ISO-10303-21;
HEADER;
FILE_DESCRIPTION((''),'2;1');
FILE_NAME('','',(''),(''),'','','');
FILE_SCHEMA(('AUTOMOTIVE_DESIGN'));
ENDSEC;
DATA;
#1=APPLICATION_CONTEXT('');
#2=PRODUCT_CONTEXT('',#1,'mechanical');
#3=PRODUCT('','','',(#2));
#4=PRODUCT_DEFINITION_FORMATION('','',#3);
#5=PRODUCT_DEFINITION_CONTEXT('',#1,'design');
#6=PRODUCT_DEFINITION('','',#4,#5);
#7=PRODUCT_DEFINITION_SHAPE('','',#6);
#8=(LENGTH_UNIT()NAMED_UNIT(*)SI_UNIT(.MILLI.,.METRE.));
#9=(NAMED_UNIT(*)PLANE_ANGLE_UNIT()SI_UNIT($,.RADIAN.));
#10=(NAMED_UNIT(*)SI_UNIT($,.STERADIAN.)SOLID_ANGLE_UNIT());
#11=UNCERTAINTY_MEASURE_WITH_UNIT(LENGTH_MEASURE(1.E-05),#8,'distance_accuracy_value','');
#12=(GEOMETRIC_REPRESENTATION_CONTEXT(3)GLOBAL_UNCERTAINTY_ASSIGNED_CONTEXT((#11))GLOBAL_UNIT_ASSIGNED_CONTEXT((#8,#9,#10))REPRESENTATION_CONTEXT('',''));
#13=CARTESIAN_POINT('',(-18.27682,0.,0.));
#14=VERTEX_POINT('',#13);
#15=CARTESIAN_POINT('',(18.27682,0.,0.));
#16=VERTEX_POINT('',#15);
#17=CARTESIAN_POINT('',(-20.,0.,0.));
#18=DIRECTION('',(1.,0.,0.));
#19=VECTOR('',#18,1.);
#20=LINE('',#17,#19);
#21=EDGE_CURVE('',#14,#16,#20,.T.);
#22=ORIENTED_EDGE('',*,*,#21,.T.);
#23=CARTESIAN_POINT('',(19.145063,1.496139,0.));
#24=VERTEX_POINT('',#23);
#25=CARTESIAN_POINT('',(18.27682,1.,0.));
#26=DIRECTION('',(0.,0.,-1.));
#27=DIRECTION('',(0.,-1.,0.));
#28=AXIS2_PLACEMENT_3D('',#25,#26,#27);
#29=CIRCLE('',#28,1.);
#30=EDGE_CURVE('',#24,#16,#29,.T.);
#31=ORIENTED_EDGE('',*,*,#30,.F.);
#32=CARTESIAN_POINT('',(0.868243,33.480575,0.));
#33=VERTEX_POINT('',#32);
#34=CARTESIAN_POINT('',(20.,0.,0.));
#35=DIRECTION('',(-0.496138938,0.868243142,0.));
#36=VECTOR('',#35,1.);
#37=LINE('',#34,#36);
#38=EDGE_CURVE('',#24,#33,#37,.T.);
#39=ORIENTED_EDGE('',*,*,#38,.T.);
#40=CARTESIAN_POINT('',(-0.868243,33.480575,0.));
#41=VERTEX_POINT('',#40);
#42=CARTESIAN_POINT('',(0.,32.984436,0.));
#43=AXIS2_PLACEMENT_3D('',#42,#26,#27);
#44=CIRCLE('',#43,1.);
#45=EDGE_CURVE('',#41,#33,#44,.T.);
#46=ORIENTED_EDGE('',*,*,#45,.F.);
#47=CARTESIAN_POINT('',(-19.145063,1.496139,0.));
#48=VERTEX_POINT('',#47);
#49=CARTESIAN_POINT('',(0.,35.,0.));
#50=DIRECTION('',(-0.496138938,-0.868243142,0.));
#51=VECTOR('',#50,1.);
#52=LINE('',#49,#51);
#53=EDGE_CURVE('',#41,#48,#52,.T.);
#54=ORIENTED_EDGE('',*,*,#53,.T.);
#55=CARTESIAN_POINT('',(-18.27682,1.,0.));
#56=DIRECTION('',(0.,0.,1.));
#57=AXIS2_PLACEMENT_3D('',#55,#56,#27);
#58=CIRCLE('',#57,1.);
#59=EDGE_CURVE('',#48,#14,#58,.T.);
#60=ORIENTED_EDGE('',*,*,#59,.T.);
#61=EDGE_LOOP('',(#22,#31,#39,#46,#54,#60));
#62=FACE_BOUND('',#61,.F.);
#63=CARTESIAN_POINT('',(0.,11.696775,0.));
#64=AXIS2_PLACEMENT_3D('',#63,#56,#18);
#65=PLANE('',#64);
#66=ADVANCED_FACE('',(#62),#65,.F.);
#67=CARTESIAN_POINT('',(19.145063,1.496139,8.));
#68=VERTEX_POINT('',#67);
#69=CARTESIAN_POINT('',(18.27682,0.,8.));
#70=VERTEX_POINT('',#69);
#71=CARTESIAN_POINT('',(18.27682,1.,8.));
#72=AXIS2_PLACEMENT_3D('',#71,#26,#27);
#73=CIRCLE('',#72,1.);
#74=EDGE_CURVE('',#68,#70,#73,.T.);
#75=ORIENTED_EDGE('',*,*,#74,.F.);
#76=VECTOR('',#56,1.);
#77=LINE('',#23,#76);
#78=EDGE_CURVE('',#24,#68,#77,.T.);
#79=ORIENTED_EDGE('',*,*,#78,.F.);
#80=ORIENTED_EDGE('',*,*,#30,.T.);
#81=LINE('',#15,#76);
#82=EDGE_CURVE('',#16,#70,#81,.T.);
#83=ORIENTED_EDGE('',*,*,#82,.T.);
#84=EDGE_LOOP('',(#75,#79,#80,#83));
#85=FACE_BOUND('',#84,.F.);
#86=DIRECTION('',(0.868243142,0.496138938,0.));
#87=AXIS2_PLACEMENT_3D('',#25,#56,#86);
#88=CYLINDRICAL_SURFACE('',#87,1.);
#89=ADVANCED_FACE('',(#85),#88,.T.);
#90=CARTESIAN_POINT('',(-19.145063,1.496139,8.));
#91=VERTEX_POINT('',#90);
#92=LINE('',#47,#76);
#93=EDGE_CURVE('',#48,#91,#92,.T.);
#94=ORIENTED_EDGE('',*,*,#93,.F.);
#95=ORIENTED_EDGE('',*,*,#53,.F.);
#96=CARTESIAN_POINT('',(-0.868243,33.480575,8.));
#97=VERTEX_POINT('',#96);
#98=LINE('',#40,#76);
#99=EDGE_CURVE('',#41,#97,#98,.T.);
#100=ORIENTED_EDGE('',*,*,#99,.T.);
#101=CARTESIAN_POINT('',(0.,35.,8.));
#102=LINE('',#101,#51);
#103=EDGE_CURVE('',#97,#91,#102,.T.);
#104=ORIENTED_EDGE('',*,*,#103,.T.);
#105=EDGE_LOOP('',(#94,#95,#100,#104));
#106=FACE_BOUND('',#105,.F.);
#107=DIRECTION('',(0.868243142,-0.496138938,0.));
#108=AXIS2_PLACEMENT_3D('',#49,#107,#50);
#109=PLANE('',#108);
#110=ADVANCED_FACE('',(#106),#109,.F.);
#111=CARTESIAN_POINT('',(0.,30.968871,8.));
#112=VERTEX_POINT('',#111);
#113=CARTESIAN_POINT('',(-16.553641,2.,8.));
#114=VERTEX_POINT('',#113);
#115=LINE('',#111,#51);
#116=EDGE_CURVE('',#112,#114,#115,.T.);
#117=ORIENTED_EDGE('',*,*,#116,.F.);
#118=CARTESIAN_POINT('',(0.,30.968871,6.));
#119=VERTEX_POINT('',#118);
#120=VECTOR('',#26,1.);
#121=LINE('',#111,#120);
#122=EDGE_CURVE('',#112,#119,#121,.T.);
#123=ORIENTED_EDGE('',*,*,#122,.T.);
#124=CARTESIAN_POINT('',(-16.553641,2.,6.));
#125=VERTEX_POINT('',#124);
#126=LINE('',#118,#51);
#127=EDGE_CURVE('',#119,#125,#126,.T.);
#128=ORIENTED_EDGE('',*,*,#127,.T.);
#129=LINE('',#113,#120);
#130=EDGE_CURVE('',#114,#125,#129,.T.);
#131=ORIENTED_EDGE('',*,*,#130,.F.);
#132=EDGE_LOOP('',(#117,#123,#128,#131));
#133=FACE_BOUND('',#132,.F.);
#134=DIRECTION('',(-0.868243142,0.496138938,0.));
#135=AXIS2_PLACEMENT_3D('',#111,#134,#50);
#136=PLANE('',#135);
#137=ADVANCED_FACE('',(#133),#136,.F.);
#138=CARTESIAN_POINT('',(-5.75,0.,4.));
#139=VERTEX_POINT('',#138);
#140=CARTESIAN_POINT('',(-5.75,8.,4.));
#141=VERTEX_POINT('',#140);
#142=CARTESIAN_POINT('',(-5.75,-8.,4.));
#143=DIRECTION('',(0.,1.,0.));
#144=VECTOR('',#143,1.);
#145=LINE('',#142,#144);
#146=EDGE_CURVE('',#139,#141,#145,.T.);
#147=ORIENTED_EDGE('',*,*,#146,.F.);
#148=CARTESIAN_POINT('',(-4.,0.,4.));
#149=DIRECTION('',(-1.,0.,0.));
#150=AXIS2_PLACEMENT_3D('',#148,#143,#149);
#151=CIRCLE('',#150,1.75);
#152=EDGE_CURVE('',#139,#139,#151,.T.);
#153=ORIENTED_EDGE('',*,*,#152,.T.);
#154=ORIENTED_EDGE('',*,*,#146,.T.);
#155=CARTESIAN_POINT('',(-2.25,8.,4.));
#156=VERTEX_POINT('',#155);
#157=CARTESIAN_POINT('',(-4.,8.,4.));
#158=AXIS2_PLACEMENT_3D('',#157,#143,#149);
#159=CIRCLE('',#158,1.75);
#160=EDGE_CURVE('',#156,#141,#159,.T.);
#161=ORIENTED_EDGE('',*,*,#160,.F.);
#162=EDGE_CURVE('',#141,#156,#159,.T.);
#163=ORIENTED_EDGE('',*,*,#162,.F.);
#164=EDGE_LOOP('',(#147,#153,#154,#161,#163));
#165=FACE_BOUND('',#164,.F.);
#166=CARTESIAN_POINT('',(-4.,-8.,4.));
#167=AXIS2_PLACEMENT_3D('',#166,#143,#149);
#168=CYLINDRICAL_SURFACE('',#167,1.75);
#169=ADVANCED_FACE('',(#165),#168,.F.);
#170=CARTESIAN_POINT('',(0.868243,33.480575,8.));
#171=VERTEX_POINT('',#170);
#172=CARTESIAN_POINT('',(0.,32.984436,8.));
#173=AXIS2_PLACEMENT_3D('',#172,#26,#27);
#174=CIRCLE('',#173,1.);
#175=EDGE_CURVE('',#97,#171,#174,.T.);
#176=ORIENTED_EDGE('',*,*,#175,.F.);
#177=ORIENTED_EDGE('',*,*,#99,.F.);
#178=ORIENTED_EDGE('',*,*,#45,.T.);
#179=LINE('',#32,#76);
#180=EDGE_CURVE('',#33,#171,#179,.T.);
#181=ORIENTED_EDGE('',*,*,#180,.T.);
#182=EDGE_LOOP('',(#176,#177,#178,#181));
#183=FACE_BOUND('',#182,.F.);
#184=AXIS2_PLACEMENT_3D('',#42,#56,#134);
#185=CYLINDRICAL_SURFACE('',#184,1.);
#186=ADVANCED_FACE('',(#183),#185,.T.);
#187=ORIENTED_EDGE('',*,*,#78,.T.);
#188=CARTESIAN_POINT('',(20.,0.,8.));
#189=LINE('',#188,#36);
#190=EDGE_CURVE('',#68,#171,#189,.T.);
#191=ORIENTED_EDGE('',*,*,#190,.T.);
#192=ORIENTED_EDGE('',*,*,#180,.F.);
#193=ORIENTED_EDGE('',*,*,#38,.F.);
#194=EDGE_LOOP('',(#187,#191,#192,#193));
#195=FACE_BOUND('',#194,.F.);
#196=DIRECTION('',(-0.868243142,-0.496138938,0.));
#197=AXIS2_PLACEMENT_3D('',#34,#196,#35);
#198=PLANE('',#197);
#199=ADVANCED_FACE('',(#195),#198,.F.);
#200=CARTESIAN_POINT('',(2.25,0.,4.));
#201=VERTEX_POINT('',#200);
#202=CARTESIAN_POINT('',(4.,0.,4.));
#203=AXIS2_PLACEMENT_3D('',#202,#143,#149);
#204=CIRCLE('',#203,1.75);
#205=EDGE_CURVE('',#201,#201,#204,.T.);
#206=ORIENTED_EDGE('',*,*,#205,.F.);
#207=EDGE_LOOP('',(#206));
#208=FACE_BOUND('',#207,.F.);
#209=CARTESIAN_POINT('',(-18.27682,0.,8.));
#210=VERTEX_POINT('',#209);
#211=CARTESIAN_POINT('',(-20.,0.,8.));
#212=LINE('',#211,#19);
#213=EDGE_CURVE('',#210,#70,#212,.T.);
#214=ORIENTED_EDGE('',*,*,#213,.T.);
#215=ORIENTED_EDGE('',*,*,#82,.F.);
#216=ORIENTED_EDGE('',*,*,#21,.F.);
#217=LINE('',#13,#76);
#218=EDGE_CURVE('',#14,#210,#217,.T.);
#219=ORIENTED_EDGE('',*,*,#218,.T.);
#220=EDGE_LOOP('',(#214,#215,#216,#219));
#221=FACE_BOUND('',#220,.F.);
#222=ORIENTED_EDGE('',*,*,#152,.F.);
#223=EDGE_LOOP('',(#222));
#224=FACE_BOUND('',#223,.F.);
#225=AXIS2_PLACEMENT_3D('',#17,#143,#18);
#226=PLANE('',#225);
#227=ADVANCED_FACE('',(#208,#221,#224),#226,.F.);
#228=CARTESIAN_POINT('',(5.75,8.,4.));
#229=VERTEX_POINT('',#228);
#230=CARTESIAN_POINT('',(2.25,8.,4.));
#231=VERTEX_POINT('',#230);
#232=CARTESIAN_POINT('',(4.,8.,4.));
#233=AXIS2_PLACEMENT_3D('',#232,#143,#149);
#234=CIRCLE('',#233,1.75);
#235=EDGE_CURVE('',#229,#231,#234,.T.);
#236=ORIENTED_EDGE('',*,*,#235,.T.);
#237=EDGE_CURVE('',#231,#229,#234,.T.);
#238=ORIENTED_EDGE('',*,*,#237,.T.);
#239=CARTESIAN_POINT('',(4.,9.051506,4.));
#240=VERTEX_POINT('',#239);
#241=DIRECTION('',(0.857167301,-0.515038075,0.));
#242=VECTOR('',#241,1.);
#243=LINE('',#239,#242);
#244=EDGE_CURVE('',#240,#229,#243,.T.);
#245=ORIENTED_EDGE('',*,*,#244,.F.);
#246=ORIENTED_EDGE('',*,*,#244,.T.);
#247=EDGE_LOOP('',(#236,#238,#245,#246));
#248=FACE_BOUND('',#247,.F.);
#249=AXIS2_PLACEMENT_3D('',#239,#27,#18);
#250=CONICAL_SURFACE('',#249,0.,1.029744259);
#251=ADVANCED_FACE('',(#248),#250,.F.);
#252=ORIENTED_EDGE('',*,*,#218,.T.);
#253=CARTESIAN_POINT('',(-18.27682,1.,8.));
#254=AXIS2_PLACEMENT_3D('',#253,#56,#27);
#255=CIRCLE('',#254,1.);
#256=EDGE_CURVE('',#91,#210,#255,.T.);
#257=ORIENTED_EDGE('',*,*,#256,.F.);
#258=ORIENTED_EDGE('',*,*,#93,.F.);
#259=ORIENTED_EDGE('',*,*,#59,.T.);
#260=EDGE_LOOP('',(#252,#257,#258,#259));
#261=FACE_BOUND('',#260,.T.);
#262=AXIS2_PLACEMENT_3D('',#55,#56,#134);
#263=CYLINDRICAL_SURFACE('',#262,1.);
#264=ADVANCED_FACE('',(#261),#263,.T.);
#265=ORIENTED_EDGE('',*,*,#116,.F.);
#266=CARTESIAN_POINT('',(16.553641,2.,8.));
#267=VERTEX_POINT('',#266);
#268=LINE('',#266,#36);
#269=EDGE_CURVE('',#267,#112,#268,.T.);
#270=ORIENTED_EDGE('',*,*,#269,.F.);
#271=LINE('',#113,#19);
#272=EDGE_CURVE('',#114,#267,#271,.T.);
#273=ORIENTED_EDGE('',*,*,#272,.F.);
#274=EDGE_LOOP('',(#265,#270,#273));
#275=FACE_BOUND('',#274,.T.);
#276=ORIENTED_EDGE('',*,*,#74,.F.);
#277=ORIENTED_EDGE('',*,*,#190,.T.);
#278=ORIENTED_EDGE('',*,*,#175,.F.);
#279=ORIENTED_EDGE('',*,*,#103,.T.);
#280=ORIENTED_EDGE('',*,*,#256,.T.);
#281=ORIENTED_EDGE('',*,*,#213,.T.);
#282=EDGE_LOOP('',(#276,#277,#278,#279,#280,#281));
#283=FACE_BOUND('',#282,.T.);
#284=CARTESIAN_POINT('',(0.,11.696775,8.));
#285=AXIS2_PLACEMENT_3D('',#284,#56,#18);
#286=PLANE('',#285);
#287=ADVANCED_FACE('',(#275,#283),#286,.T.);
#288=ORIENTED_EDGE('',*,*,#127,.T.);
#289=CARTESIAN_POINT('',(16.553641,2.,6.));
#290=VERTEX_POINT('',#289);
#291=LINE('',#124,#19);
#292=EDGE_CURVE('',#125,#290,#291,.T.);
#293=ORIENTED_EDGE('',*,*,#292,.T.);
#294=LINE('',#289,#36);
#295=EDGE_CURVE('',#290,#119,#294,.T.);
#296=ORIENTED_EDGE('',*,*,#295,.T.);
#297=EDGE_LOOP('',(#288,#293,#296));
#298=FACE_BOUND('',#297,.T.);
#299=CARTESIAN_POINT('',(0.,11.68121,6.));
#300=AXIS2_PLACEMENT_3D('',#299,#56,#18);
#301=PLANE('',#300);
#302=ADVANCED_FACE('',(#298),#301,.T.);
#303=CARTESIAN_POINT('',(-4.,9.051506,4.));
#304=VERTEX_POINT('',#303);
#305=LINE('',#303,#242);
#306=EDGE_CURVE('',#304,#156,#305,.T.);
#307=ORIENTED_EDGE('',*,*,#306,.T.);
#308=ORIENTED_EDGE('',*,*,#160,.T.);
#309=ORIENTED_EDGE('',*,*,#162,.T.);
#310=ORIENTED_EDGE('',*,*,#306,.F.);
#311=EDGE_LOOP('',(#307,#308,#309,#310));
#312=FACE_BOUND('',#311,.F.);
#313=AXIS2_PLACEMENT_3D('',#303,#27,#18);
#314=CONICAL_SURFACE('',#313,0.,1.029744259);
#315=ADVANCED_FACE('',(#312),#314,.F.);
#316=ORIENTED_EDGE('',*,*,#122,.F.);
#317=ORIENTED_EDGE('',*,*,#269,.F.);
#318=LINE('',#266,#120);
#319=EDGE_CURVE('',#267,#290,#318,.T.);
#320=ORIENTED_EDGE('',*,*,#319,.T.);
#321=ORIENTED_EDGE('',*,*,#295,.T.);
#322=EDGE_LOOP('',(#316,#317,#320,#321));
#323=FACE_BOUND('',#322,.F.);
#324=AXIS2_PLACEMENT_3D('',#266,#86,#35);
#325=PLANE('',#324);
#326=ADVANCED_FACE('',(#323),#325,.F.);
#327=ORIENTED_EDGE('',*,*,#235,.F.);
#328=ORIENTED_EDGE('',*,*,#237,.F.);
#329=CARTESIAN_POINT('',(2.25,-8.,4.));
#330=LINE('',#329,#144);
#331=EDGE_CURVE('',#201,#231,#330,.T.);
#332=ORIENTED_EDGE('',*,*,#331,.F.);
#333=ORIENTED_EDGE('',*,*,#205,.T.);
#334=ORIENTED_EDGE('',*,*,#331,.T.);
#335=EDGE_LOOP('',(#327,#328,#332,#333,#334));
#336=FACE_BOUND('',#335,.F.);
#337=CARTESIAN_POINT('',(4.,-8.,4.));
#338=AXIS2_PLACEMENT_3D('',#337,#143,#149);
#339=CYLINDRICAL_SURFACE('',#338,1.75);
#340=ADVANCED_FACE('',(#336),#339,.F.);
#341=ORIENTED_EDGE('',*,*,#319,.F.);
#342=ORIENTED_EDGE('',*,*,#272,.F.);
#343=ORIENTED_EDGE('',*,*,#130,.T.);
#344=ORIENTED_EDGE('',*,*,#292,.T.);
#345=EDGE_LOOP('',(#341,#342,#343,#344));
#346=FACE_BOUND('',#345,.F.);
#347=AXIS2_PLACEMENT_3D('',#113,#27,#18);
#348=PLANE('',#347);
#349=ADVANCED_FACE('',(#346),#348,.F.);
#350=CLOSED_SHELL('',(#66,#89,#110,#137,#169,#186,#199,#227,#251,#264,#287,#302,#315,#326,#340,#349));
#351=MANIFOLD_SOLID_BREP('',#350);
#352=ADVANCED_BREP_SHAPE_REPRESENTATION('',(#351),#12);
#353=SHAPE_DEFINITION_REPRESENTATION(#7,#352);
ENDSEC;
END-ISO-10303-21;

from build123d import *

# Parameters (mm, degrees)
F1_DEPTH = 8
F3_DEPTH = 2
F5_D     = 3.5
F5_DEPTH = 8
F5_TIP   = 1.0515060833
F6_R     = 1


with BuildPart() as f1:
    # F0 (on Top) → F1 (new body)
    with BuildSketch(Plane.XY):
        Polygon((0, 35), (-20, 0), (20, 0), align=None)
    extrude(amount=F1_DEPTH)

    # F2 (on face) → F3 (cut)
    with BuildSketch(Plane.XY.offset(8)):
        Polygon((0, 30.9688711259), (-16.5536406433, 2), (16.5536406433, 2), align=None)
    extrude(amount=-F3_DEPTH, mode=Mode.SUBTRACT)

    # F5
    with Locations(Plane.XZ):
        with Locations((-4, 4), (4, 4)):
            Hole(F5_D / 2, depth=F5_DEPTH)
            with Locations((0, 0, -(F5_DEPTH + F5_TIP / 2))):  # 118° drill point
                Cone(0, F5_D / 2, F5_TIP, mode=Mode.SUBTRACT)

    # F6
    f6_edges = [f1.edges().sort_by_distance(p)[0] for p in [
        (0, 35, 4),
        (-20, 0, 4),
        (20, 0, 4),
    ]]
    fillet(f6_edges, radius=F6_R)


solid = f1.part
